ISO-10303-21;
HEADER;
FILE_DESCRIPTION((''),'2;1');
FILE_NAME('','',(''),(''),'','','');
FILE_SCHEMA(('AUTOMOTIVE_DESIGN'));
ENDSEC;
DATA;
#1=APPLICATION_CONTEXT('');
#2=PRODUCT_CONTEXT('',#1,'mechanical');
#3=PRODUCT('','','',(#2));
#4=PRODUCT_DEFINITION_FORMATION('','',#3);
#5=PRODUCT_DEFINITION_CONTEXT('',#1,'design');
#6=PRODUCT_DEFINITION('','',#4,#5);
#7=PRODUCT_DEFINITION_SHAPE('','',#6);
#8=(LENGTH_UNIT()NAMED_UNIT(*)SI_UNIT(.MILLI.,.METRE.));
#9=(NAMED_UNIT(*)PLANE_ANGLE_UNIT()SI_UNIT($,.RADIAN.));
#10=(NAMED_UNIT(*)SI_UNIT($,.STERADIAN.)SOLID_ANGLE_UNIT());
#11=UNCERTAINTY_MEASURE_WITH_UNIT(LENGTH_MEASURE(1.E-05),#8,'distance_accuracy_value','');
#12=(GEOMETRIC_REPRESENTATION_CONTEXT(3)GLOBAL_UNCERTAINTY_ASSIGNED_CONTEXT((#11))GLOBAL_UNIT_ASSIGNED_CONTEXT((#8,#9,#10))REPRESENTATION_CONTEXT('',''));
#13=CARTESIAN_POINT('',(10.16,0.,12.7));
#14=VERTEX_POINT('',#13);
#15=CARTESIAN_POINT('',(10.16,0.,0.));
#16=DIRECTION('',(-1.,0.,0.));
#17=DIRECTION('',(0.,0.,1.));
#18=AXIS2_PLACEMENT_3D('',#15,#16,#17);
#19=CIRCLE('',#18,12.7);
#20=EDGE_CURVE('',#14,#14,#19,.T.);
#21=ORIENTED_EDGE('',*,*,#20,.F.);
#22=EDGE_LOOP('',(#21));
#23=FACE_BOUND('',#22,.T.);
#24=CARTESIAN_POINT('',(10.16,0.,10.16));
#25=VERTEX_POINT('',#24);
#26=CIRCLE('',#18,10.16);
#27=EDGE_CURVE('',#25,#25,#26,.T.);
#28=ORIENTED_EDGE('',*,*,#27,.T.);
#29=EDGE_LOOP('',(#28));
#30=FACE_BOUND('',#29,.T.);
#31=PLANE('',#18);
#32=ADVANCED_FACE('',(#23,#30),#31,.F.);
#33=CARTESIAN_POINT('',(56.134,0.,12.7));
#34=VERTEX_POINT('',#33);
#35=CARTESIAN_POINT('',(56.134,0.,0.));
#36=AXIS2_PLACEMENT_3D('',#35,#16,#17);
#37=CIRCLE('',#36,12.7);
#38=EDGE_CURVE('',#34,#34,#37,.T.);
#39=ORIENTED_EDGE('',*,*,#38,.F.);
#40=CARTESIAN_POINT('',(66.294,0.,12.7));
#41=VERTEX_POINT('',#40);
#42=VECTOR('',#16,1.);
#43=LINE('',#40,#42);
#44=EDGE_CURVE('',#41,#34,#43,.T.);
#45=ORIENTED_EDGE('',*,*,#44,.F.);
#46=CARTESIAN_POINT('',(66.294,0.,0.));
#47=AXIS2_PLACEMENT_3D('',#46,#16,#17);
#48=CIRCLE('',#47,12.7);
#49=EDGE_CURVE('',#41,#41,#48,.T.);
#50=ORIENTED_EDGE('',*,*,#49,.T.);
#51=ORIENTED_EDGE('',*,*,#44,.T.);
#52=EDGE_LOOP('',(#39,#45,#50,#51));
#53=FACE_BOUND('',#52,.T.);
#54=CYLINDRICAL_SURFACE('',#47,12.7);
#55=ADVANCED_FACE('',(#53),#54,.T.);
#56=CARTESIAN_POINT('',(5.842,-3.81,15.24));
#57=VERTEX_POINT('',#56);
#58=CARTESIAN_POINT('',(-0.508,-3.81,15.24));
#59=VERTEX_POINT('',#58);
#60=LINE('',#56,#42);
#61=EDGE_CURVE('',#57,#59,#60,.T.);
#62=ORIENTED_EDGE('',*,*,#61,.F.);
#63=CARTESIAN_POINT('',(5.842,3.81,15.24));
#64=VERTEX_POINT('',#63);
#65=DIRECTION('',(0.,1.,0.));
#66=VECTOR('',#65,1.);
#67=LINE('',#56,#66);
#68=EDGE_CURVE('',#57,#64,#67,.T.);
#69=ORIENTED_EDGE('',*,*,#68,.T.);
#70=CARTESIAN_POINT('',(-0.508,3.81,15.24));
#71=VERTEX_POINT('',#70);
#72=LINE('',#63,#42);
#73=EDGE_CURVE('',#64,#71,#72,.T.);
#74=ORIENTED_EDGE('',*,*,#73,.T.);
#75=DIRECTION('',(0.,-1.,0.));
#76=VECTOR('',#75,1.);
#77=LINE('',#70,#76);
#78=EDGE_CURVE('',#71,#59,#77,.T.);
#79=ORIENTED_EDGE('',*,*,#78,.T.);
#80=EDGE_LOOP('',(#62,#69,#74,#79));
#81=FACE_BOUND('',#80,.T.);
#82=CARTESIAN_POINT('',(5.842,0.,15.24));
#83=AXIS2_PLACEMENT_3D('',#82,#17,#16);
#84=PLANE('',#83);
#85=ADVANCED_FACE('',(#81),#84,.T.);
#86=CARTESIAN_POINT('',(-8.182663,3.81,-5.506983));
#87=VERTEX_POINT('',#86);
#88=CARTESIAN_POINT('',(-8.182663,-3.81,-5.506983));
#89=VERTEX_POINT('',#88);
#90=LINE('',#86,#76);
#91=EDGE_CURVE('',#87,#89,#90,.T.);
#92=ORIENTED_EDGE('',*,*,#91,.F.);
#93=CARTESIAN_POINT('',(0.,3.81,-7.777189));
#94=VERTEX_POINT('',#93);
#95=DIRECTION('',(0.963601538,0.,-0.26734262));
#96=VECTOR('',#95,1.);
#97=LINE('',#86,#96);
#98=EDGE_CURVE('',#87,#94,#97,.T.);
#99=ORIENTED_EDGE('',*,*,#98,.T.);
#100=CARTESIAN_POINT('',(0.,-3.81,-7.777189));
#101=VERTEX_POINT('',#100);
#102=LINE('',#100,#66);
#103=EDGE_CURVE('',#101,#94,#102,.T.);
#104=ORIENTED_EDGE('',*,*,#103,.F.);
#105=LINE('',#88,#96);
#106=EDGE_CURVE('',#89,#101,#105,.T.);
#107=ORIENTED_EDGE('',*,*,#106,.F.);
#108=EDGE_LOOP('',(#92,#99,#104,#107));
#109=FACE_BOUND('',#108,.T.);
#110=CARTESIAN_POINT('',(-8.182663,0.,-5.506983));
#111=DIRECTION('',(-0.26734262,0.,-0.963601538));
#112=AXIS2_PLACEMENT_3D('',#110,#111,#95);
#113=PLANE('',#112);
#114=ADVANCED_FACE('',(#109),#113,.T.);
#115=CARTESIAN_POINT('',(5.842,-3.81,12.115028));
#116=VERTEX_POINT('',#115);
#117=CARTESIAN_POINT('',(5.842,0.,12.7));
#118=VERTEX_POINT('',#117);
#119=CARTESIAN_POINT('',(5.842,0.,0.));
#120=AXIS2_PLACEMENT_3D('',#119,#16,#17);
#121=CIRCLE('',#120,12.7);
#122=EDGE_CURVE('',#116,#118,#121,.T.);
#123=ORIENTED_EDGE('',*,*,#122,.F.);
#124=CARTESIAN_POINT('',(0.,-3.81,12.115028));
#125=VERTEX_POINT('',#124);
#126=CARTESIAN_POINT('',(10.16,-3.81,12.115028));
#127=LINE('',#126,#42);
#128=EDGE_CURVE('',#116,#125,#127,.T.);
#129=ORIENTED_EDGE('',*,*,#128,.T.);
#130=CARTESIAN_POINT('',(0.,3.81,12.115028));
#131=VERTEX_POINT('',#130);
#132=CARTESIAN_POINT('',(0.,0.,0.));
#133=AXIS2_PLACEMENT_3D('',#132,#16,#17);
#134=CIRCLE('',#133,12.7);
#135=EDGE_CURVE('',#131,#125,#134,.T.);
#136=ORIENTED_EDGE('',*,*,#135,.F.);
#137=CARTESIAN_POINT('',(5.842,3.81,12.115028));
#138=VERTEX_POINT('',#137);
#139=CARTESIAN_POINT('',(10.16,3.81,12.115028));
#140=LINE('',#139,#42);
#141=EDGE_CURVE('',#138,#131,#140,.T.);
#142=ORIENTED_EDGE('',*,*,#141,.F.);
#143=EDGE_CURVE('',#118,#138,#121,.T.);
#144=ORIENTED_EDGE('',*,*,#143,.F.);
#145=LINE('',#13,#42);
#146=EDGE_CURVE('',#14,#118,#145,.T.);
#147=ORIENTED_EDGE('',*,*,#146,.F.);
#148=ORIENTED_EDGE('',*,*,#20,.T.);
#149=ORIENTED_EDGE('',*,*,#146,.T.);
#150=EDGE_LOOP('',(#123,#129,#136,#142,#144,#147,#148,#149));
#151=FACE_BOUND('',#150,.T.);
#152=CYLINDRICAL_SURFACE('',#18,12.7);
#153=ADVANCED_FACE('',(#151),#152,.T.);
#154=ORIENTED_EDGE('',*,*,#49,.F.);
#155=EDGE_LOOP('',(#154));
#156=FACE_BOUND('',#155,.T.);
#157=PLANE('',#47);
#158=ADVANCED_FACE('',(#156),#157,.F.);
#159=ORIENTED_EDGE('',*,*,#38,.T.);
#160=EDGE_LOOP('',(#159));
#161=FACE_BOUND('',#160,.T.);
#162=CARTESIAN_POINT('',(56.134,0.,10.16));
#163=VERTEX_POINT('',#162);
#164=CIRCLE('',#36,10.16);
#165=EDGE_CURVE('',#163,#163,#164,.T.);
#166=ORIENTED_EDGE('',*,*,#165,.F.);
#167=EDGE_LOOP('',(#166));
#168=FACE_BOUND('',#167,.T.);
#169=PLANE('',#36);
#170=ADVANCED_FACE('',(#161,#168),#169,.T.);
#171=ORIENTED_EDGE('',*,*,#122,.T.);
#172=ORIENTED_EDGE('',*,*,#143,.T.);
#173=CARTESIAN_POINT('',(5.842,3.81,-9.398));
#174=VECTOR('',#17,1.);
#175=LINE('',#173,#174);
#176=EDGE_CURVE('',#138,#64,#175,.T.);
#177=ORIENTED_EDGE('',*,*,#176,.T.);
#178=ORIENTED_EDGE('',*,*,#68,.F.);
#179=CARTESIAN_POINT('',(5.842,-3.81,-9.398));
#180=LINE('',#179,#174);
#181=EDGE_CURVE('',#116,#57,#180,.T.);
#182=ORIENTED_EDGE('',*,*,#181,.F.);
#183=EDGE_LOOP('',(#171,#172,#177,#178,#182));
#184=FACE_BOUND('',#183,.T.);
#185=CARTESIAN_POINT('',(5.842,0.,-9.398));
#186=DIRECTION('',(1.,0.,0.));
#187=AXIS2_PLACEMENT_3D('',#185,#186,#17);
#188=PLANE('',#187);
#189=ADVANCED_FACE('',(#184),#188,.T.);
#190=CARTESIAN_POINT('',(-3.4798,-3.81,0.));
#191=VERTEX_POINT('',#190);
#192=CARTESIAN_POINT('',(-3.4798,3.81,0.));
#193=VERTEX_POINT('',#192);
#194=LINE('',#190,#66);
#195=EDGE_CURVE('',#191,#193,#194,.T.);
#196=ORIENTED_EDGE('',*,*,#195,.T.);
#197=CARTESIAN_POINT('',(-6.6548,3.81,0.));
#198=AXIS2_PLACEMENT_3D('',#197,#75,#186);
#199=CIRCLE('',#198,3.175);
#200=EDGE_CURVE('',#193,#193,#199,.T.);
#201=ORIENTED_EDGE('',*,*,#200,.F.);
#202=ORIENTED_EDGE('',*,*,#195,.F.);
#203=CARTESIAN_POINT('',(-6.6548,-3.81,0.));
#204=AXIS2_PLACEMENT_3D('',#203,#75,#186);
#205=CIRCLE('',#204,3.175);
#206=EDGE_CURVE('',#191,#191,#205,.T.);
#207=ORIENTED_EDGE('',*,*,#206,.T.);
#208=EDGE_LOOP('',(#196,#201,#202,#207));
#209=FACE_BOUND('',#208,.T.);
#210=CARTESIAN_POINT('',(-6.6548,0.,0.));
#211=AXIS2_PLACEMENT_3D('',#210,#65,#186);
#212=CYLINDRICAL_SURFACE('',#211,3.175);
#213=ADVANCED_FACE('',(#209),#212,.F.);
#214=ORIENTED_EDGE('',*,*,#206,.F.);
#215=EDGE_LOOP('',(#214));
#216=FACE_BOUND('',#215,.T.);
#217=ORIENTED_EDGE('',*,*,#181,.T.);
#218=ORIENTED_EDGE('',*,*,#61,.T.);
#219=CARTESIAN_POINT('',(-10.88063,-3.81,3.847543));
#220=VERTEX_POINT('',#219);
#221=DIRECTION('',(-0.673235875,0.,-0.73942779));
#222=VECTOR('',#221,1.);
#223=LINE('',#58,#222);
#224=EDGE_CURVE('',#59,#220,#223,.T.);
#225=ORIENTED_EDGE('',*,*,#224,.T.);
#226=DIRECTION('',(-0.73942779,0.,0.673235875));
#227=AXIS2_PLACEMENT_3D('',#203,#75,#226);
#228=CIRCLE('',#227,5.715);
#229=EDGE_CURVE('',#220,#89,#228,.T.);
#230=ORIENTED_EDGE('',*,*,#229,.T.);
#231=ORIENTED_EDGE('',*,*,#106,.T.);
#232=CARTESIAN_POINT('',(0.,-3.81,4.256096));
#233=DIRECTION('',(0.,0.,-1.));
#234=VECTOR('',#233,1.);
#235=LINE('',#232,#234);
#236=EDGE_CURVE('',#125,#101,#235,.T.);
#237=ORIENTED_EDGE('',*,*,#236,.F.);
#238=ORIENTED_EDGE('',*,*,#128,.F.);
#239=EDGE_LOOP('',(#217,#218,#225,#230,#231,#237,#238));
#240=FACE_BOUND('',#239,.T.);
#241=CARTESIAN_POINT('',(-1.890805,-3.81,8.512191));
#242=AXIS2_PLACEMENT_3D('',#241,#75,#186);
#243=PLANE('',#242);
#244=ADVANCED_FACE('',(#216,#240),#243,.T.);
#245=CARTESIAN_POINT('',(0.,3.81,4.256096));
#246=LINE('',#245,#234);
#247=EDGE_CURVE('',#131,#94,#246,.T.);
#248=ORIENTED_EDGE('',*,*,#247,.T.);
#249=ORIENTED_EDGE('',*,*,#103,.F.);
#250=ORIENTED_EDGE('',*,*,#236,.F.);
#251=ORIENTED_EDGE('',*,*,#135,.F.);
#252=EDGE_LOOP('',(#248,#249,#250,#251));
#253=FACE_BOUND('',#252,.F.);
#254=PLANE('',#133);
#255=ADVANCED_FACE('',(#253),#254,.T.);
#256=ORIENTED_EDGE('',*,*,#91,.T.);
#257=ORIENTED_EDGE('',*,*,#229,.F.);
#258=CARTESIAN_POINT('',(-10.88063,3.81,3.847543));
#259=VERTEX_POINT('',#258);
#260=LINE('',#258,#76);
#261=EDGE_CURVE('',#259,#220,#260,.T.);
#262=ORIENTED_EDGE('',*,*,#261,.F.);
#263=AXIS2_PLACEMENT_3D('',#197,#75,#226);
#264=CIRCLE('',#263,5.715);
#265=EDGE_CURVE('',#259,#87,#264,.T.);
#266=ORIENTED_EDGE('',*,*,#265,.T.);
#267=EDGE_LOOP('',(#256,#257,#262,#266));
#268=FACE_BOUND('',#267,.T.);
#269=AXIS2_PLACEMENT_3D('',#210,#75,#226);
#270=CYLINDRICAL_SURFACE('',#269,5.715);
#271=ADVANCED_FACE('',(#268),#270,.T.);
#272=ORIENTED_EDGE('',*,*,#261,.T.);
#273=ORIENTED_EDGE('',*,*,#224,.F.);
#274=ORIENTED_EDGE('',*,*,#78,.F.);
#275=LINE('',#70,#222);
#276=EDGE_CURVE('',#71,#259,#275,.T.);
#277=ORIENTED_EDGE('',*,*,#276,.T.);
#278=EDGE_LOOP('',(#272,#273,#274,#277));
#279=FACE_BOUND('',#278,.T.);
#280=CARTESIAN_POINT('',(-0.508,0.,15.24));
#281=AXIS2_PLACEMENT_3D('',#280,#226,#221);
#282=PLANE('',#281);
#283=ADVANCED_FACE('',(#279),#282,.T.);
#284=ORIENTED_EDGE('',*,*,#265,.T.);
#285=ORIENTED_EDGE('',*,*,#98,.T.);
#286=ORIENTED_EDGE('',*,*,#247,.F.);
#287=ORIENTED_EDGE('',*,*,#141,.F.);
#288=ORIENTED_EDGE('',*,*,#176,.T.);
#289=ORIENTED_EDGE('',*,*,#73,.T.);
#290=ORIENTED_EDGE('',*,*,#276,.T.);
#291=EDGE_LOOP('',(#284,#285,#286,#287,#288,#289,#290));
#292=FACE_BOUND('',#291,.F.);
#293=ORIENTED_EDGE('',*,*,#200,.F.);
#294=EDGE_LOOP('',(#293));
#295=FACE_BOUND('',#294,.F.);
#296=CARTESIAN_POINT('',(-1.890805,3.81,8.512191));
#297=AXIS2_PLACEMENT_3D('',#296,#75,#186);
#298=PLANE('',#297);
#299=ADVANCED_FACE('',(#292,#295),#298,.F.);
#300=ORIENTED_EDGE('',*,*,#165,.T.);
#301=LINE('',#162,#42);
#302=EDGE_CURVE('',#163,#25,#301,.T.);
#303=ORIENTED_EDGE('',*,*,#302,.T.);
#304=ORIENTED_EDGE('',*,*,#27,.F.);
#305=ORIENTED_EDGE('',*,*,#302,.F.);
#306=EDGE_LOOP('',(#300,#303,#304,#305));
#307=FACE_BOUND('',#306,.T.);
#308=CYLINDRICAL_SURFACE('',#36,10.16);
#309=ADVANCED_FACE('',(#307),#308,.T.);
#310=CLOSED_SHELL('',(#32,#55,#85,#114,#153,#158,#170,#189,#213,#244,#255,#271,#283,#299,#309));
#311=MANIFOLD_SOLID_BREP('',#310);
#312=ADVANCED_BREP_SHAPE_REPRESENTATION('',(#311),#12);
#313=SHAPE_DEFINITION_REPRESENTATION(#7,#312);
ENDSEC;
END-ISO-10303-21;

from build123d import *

# Parameters (mm, degrees)
F0_W     = 5.842
F0_H     = 12.7
F0_R     = 3.175
F2_DEPTH = 3.81


# Not quite as in the source:
# - a feature of the source that left no trace in its solid (it failed there, or was rolled back) is left out


with BuildPart() as f1:
    # F0 (on Front) → F1 (revolve)
    with BuildSketch(Plane.XZ):
        Polygon((5.842, 12.7), (5.842, 0), (66.294, 0), (66.294, 12.7), (56.134, 12.7), (56.134, 10.16), (10.16, 10.16), (10.16, 12.7), align=None)
        with Locations((2.921, 6.35)):
            Rectangle(F0_W, F0_H)
    revolve(axis=Axis((33.147, 0, 0), (-1, 0, 0)))

    # F0 (on Front) → F2 (join, symmetric)
    with BuildSketch(Plane.XZ):
        with BuildLine():
            Line((-0.9398, 0), (0, 0))
            Line((0, 0), (0, 12.7))
            Line((0, 12.7), (5.842, 12.7))
            Line((5.842, 12.7), (5.842, 15.24))
            Line((5.842, 15.24), (-0.508, 15.24))
            Line((-0.508, 15.24), (-10.8806298187, 3.8475430269))
            ThreePointArc((-10.8806298187, 3.8475430269), (-4.5919612295, 5.3297205562), (-0.9398, 0))
        make_face()
        with BuildLine():
            ThreePointArc((-8.1826630726, -5.5069827884), (-3.1957909266, -4.5493385486), (-0.9398, 0))
            ThreePointArc((-0.9398, 0), (-4.5919612295, 5.3297205562), (-10.8806298187, 3.8475430269))
            ThreePointArc((-10.8806298187, 3.8475430269), (-12.1459778134, -1.5837270034), (-8.1826630726, -5.5069827884))
        make_face()
        with Locations((-6.6548, 0)):
            Circle(F0_R, mode=Mode.SUBTRACT)
        with BuildLine():
            Line((0, -7.7771894014), (0, 0))
            Line((0, 0), (-0.9398, 0))
            ThreePointArc((-0.9398, 0), (-3.1957909266, -4.5493385486), (-8.1826630726, -5.5069827884))
            Line((-8.1826630726, -5.5069827884), (0, -7.7771894014))
        make_face()
        with Locations((2.921, 6.35)):
            Rectangle(F0_W, F0_H)
        Polygon((5.842, 0), (0, 0), (0, -7.7771894014), (5.842, -9.398), align=None)
    extrude(amount=F2_DEPTH, both=True)


solid = f1.part
